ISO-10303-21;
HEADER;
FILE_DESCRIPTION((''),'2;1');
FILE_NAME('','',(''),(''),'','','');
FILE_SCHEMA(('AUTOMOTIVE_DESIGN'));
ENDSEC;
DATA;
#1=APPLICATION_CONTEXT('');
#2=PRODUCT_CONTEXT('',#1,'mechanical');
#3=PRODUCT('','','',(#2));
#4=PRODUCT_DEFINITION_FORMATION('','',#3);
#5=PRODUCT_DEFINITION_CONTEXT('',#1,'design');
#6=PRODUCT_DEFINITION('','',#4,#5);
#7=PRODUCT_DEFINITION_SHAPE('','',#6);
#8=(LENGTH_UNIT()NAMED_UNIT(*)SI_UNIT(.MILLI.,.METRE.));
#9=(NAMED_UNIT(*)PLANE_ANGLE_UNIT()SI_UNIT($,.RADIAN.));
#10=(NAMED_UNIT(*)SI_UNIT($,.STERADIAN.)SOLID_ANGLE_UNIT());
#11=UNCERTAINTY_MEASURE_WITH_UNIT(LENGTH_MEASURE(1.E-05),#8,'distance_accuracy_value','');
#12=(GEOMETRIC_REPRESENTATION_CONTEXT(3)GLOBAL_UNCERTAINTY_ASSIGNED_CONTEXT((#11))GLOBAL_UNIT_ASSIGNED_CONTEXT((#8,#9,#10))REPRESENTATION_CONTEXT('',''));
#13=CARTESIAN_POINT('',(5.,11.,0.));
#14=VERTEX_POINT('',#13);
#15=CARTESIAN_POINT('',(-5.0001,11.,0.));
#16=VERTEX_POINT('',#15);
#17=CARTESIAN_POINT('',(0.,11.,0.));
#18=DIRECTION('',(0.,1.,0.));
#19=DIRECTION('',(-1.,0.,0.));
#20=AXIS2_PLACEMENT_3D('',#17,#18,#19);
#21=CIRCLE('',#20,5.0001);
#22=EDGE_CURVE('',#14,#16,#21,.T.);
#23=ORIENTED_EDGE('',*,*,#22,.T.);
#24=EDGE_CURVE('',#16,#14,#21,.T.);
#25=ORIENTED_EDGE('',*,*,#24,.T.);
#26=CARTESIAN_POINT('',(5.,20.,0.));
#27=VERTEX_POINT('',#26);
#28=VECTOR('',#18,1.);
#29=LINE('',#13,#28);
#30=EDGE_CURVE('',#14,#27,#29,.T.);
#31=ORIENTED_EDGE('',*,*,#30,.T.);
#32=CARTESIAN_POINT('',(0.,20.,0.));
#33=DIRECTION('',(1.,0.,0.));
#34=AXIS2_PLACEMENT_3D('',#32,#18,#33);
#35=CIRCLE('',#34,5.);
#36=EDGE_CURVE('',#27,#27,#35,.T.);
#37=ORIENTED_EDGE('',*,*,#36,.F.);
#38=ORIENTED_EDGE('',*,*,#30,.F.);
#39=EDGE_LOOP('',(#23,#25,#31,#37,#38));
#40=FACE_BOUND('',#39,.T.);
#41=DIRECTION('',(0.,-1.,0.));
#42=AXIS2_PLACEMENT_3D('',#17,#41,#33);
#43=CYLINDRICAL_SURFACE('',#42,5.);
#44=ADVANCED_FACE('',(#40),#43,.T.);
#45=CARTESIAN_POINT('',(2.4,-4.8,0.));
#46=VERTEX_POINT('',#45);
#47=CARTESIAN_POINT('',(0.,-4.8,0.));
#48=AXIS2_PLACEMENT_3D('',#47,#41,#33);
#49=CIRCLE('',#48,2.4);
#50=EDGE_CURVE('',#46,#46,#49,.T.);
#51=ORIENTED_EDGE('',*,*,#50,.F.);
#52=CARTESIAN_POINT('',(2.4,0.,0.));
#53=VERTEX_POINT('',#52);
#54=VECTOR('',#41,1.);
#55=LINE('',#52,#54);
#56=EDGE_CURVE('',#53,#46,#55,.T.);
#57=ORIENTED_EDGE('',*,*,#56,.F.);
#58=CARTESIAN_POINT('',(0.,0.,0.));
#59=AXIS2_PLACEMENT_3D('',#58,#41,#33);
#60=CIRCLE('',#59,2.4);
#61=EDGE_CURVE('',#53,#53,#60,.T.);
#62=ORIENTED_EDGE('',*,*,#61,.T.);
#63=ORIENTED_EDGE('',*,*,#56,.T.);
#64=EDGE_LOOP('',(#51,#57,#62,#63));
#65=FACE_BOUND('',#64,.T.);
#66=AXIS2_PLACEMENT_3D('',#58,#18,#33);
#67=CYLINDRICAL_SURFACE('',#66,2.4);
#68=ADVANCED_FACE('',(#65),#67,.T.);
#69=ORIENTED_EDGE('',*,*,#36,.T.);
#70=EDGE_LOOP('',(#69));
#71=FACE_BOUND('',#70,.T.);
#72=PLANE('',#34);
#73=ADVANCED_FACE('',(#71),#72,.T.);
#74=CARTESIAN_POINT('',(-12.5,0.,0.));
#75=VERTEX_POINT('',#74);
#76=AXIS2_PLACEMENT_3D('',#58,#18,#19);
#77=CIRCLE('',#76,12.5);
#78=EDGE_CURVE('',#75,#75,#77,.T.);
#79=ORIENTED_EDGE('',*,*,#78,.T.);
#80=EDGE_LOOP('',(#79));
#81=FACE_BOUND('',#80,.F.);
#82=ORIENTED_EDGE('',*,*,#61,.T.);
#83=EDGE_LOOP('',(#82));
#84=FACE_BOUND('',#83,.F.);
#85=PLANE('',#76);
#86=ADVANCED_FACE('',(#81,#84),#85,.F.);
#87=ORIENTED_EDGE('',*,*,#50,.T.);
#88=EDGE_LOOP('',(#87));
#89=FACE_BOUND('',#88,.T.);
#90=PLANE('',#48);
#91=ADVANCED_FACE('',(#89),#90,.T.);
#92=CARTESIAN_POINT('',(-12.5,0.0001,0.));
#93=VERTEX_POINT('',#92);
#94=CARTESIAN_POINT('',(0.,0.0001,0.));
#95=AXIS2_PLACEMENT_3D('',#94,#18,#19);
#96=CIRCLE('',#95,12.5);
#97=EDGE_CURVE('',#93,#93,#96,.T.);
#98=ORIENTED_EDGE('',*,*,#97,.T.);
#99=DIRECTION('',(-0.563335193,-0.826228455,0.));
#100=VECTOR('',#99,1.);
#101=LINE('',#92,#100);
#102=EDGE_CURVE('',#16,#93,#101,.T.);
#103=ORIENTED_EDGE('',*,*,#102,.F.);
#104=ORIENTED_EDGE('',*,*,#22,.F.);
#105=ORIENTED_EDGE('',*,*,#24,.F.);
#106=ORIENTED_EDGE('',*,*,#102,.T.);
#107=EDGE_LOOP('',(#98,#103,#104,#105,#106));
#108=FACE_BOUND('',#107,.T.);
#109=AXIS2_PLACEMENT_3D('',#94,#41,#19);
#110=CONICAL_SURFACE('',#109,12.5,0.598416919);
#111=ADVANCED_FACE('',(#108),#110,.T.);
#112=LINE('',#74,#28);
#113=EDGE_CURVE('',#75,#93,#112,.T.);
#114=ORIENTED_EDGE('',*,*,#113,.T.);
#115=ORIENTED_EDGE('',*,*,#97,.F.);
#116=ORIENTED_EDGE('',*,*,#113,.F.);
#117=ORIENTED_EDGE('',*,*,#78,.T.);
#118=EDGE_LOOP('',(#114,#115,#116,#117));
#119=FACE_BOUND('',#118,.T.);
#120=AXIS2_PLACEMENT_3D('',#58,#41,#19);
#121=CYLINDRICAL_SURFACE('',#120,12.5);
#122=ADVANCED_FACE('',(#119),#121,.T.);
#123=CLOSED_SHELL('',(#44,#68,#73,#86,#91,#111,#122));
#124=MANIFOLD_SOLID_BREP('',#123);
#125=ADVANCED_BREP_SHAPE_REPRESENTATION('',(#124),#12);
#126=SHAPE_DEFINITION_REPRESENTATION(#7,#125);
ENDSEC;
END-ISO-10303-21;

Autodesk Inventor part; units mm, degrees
ref_plane "YZ Plane" through (0, 0, 0) normal (1, 0, 0) x (0, 1, 0)
ref_plane "XZ Plane" through (0, 0, 0) normal (0, 1, 0) x (-1, 0, 0)
ref_plane "XY Plane" through (0, 0, 0) normal (0, 0, 1) x (1, 0, 0)
sketch "Sketch1" plane through (0, 0, 0) normal (0, 1, 0) x (-1, 0, 0)
  circle A0 centre (0, 0) radius 12.5
  dimension "d0" = 25
extrude "Extrusion1" add sketch "Sketch1" along normal blind 11
chamfer "Chamfer1" distance 7.5 distance2 11 1 edges at (12.5, 11, 0) measured on face at (-2.488, 11, -2.432)
sketch "Sketch2" plane through (0, 11, 0) normal (0, 1, 0) x (1, 0, 0)
  circle A0 centre (0, 0) radius 5 projected
  circle A1 centre (0, 0) radius 5
extrude "Extrusion2" add sketch "Sketch2" along normal blind 9
sketch "Sketch3" plane through (0, 0, 0) normal (0, -1, 0) x (1, 0, 0)
  circle A0 centre (0, 0) radius 2.4
  dimension "d8" = 4.8
extrude "Extrusion3" add sketch "Sketch3" along normal blind 4.8
properties part number "pladsholder"
